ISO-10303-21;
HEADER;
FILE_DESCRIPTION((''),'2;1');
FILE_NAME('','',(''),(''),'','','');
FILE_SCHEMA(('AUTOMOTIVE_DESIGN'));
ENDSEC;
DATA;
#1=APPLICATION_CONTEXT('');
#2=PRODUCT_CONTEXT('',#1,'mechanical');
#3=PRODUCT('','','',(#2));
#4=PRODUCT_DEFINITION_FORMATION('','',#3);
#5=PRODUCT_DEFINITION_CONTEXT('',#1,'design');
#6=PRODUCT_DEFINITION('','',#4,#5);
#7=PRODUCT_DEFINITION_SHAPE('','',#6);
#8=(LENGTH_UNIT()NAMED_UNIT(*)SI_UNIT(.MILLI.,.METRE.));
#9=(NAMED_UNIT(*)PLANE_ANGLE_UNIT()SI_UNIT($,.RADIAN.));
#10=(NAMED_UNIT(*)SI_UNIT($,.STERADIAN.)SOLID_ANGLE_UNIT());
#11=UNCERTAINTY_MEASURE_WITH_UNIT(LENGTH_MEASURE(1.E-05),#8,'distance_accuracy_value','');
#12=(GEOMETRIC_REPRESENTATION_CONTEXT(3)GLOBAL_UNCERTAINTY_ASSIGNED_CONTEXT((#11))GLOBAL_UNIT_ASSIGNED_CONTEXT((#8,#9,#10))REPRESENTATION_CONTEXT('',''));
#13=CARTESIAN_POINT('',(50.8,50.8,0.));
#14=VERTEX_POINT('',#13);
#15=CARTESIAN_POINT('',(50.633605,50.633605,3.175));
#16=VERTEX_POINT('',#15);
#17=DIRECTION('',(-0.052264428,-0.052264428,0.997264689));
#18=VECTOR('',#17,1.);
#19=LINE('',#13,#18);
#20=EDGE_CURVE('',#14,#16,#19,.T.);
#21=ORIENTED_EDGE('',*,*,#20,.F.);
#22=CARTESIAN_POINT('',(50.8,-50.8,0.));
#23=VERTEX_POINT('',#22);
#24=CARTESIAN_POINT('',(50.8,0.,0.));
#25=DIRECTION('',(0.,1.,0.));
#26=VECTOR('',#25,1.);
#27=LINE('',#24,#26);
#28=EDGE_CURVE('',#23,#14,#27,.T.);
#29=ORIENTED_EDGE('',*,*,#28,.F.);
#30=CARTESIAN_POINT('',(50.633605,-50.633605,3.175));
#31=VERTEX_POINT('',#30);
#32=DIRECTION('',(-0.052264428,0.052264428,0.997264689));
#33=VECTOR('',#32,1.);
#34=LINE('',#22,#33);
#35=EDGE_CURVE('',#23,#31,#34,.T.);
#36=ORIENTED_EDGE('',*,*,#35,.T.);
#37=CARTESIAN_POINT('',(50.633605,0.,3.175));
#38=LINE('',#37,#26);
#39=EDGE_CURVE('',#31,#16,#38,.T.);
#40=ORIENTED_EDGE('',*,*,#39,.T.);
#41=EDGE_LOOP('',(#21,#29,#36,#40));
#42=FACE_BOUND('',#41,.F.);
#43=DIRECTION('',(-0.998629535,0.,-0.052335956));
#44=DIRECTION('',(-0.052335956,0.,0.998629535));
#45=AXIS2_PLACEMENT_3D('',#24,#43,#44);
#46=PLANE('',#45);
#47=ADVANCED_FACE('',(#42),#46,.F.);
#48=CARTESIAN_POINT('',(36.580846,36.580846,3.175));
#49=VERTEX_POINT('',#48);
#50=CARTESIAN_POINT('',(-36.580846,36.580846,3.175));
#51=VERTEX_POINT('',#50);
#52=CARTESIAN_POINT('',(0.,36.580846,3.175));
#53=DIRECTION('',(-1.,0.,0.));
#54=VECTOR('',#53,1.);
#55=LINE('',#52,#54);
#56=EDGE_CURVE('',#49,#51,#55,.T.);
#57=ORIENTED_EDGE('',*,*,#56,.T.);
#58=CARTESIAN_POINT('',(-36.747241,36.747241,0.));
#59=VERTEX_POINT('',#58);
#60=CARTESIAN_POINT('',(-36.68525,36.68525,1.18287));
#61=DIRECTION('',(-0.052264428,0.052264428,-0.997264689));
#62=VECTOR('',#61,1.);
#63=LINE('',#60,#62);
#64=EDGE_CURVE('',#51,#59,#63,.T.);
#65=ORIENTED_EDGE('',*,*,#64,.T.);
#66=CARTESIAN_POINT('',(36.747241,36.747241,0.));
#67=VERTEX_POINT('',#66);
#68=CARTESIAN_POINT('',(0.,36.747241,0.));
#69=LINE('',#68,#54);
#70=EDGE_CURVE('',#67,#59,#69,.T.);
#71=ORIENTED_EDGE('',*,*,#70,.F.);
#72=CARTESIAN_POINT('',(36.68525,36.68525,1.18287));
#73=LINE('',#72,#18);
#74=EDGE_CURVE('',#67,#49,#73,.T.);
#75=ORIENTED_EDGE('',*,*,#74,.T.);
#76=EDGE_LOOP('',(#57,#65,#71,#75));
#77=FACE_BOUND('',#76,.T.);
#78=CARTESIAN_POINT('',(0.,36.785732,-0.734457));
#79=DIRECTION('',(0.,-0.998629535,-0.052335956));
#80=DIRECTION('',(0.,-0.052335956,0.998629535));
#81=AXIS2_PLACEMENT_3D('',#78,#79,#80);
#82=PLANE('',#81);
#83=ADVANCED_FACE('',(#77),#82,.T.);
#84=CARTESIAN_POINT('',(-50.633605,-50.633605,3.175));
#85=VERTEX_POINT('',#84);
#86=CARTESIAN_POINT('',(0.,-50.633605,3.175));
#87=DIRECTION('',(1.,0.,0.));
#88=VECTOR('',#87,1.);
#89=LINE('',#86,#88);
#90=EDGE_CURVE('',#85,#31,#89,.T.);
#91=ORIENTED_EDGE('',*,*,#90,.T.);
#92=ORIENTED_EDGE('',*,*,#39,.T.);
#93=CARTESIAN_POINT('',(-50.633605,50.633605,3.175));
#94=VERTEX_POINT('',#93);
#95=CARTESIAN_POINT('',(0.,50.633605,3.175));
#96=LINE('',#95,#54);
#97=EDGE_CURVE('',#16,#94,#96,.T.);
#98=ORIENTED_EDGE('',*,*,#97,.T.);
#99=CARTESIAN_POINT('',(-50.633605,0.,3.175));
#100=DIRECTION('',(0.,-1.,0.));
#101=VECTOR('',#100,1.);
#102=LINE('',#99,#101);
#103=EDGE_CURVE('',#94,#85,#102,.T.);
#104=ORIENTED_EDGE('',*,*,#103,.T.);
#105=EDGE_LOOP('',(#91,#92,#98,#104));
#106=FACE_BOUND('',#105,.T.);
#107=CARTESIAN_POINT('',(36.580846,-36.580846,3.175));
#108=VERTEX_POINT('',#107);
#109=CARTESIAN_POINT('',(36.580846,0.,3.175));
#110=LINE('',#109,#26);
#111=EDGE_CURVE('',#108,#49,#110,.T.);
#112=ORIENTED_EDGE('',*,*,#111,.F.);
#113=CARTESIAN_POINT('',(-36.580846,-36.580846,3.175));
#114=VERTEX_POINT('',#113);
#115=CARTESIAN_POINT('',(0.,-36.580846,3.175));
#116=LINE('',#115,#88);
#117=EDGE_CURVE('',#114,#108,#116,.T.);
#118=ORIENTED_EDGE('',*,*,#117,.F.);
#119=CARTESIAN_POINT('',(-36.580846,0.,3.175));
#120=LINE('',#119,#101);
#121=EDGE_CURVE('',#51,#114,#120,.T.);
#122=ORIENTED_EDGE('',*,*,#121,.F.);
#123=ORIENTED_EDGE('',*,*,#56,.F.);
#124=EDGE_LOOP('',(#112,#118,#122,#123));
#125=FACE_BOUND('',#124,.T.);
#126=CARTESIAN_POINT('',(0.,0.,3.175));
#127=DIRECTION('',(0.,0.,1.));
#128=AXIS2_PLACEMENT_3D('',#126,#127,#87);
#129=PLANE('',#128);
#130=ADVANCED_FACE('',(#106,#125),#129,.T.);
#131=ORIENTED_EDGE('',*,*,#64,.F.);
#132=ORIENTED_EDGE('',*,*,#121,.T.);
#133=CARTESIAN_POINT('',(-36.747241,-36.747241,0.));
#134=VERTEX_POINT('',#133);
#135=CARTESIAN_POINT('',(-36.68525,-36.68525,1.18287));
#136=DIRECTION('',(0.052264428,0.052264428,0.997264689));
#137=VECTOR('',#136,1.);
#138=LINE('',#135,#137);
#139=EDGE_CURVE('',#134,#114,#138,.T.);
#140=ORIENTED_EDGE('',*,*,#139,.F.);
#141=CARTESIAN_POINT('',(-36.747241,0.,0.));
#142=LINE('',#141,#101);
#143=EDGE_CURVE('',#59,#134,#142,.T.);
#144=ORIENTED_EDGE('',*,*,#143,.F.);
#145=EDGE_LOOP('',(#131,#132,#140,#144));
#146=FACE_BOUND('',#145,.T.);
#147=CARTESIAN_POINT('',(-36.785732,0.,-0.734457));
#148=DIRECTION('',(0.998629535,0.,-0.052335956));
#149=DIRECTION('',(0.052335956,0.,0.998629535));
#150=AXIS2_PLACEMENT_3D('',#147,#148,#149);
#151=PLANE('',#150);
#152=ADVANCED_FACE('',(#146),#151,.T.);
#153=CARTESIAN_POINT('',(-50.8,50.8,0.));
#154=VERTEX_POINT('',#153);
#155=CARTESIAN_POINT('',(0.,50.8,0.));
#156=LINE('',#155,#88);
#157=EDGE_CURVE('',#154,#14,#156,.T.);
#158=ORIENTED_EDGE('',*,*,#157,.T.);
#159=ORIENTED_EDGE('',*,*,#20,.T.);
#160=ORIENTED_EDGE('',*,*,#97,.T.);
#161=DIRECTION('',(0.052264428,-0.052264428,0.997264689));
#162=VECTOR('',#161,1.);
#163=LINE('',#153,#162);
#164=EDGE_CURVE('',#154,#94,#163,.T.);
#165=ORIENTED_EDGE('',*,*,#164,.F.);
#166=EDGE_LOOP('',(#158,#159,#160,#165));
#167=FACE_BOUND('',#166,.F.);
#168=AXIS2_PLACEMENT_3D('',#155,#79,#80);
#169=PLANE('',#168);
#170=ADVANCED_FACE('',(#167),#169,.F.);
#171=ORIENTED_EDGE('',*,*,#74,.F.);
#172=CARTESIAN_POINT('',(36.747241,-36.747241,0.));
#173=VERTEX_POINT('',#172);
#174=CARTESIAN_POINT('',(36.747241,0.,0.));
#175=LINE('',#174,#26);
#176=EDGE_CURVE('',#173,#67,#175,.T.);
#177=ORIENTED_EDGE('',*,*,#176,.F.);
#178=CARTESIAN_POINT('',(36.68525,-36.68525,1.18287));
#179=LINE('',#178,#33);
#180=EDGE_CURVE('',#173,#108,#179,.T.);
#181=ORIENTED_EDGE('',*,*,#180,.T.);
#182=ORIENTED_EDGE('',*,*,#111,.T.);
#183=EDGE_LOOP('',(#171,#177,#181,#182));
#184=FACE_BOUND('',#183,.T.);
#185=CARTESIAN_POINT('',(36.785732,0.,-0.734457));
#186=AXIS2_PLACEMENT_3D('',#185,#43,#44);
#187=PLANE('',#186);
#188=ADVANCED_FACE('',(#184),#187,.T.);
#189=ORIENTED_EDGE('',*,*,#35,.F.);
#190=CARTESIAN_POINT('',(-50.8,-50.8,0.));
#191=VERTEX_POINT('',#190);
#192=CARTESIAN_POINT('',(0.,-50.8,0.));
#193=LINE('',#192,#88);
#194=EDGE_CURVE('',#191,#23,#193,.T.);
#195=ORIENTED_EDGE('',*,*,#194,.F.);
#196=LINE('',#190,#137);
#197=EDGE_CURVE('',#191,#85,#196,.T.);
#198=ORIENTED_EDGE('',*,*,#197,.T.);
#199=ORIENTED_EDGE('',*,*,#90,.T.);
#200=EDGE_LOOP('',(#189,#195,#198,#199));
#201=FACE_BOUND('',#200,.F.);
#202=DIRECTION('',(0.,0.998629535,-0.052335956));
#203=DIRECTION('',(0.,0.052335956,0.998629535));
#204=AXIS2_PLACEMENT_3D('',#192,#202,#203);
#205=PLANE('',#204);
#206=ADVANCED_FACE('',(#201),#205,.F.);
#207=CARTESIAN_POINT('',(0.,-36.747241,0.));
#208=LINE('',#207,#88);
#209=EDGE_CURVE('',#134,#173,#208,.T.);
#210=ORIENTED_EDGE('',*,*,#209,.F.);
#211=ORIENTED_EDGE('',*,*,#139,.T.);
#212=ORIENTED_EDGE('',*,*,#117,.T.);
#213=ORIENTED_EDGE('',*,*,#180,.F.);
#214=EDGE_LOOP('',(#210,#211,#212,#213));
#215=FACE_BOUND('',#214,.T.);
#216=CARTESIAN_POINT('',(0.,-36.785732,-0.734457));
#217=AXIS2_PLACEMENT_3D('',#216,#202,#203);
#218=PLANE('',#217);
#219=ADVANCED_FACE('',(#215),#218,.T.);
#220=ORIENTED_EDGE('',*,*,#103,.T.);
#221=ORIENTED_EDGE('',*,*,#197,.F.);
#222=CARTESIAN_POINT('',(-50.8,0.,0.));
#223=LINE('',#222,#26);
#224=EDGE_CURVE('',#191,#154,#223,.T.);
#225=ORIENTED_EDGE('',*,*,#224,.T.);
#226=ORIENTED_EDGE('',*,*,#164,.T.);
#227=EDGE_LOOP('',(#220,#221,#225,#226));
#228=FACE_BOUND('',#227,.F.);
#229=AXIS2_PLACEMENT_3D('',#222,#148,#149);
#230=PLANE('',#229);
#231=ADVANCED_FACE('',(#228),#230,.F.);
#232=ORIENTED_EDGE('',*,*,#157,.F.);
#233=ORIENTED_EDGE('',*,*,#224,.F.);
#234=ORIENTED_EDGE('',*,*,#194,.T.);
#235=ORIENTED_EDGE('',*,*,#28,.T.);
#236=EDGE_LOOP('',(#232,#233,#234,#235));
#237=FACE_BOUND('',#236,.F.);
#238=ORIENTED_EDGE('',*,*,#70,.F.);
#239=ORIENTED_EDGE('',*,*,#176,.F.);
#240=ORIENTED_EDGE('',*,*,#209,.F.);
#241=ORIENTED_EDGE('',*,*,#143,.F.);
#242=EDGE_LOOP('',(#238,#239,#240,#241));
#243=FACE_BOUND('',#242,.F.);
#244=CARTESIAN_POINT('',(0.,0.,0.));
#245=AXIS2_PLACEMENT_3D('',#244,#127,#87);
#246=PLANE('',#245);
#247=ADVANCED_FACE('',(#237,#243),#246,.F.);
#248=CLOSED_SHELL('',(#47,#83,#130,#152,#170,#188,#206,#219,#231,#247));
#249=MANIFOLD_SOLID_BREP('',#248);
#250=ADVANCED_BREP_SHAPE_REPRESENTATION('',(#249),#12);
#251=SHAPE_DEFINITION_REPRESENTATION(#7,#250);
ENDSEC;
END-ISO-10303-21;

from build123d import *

# Parameters (mm, degrees)
F0_W     = 101.6
F0_H     = 101.6
F1_DEPTH = 3.175
F1_TAPER = 3
F2_T     = -14.0335


# Not quite as in the source:
# - a feature of the source that left no trace in its solid (it failed there, or was rolled back) is left out


with BuildPart() as f1:
    # F0 (on Top) → F1 (new body)
    with BuildSketch(Plane.XY):
        Rectangle(F0_W, F0_H)
    extrude(amount=F1_DEPTH, taper=F1_TAPER)

    # F2
    f2_openings = [f1.faces().sort_by_distance(p)[0] for p in [
        (0, 0, 3.175),
        (0, 0, 0),
    ]]
    offset(amount=F2_T, openings=f2_openings)


solid = f1.part
